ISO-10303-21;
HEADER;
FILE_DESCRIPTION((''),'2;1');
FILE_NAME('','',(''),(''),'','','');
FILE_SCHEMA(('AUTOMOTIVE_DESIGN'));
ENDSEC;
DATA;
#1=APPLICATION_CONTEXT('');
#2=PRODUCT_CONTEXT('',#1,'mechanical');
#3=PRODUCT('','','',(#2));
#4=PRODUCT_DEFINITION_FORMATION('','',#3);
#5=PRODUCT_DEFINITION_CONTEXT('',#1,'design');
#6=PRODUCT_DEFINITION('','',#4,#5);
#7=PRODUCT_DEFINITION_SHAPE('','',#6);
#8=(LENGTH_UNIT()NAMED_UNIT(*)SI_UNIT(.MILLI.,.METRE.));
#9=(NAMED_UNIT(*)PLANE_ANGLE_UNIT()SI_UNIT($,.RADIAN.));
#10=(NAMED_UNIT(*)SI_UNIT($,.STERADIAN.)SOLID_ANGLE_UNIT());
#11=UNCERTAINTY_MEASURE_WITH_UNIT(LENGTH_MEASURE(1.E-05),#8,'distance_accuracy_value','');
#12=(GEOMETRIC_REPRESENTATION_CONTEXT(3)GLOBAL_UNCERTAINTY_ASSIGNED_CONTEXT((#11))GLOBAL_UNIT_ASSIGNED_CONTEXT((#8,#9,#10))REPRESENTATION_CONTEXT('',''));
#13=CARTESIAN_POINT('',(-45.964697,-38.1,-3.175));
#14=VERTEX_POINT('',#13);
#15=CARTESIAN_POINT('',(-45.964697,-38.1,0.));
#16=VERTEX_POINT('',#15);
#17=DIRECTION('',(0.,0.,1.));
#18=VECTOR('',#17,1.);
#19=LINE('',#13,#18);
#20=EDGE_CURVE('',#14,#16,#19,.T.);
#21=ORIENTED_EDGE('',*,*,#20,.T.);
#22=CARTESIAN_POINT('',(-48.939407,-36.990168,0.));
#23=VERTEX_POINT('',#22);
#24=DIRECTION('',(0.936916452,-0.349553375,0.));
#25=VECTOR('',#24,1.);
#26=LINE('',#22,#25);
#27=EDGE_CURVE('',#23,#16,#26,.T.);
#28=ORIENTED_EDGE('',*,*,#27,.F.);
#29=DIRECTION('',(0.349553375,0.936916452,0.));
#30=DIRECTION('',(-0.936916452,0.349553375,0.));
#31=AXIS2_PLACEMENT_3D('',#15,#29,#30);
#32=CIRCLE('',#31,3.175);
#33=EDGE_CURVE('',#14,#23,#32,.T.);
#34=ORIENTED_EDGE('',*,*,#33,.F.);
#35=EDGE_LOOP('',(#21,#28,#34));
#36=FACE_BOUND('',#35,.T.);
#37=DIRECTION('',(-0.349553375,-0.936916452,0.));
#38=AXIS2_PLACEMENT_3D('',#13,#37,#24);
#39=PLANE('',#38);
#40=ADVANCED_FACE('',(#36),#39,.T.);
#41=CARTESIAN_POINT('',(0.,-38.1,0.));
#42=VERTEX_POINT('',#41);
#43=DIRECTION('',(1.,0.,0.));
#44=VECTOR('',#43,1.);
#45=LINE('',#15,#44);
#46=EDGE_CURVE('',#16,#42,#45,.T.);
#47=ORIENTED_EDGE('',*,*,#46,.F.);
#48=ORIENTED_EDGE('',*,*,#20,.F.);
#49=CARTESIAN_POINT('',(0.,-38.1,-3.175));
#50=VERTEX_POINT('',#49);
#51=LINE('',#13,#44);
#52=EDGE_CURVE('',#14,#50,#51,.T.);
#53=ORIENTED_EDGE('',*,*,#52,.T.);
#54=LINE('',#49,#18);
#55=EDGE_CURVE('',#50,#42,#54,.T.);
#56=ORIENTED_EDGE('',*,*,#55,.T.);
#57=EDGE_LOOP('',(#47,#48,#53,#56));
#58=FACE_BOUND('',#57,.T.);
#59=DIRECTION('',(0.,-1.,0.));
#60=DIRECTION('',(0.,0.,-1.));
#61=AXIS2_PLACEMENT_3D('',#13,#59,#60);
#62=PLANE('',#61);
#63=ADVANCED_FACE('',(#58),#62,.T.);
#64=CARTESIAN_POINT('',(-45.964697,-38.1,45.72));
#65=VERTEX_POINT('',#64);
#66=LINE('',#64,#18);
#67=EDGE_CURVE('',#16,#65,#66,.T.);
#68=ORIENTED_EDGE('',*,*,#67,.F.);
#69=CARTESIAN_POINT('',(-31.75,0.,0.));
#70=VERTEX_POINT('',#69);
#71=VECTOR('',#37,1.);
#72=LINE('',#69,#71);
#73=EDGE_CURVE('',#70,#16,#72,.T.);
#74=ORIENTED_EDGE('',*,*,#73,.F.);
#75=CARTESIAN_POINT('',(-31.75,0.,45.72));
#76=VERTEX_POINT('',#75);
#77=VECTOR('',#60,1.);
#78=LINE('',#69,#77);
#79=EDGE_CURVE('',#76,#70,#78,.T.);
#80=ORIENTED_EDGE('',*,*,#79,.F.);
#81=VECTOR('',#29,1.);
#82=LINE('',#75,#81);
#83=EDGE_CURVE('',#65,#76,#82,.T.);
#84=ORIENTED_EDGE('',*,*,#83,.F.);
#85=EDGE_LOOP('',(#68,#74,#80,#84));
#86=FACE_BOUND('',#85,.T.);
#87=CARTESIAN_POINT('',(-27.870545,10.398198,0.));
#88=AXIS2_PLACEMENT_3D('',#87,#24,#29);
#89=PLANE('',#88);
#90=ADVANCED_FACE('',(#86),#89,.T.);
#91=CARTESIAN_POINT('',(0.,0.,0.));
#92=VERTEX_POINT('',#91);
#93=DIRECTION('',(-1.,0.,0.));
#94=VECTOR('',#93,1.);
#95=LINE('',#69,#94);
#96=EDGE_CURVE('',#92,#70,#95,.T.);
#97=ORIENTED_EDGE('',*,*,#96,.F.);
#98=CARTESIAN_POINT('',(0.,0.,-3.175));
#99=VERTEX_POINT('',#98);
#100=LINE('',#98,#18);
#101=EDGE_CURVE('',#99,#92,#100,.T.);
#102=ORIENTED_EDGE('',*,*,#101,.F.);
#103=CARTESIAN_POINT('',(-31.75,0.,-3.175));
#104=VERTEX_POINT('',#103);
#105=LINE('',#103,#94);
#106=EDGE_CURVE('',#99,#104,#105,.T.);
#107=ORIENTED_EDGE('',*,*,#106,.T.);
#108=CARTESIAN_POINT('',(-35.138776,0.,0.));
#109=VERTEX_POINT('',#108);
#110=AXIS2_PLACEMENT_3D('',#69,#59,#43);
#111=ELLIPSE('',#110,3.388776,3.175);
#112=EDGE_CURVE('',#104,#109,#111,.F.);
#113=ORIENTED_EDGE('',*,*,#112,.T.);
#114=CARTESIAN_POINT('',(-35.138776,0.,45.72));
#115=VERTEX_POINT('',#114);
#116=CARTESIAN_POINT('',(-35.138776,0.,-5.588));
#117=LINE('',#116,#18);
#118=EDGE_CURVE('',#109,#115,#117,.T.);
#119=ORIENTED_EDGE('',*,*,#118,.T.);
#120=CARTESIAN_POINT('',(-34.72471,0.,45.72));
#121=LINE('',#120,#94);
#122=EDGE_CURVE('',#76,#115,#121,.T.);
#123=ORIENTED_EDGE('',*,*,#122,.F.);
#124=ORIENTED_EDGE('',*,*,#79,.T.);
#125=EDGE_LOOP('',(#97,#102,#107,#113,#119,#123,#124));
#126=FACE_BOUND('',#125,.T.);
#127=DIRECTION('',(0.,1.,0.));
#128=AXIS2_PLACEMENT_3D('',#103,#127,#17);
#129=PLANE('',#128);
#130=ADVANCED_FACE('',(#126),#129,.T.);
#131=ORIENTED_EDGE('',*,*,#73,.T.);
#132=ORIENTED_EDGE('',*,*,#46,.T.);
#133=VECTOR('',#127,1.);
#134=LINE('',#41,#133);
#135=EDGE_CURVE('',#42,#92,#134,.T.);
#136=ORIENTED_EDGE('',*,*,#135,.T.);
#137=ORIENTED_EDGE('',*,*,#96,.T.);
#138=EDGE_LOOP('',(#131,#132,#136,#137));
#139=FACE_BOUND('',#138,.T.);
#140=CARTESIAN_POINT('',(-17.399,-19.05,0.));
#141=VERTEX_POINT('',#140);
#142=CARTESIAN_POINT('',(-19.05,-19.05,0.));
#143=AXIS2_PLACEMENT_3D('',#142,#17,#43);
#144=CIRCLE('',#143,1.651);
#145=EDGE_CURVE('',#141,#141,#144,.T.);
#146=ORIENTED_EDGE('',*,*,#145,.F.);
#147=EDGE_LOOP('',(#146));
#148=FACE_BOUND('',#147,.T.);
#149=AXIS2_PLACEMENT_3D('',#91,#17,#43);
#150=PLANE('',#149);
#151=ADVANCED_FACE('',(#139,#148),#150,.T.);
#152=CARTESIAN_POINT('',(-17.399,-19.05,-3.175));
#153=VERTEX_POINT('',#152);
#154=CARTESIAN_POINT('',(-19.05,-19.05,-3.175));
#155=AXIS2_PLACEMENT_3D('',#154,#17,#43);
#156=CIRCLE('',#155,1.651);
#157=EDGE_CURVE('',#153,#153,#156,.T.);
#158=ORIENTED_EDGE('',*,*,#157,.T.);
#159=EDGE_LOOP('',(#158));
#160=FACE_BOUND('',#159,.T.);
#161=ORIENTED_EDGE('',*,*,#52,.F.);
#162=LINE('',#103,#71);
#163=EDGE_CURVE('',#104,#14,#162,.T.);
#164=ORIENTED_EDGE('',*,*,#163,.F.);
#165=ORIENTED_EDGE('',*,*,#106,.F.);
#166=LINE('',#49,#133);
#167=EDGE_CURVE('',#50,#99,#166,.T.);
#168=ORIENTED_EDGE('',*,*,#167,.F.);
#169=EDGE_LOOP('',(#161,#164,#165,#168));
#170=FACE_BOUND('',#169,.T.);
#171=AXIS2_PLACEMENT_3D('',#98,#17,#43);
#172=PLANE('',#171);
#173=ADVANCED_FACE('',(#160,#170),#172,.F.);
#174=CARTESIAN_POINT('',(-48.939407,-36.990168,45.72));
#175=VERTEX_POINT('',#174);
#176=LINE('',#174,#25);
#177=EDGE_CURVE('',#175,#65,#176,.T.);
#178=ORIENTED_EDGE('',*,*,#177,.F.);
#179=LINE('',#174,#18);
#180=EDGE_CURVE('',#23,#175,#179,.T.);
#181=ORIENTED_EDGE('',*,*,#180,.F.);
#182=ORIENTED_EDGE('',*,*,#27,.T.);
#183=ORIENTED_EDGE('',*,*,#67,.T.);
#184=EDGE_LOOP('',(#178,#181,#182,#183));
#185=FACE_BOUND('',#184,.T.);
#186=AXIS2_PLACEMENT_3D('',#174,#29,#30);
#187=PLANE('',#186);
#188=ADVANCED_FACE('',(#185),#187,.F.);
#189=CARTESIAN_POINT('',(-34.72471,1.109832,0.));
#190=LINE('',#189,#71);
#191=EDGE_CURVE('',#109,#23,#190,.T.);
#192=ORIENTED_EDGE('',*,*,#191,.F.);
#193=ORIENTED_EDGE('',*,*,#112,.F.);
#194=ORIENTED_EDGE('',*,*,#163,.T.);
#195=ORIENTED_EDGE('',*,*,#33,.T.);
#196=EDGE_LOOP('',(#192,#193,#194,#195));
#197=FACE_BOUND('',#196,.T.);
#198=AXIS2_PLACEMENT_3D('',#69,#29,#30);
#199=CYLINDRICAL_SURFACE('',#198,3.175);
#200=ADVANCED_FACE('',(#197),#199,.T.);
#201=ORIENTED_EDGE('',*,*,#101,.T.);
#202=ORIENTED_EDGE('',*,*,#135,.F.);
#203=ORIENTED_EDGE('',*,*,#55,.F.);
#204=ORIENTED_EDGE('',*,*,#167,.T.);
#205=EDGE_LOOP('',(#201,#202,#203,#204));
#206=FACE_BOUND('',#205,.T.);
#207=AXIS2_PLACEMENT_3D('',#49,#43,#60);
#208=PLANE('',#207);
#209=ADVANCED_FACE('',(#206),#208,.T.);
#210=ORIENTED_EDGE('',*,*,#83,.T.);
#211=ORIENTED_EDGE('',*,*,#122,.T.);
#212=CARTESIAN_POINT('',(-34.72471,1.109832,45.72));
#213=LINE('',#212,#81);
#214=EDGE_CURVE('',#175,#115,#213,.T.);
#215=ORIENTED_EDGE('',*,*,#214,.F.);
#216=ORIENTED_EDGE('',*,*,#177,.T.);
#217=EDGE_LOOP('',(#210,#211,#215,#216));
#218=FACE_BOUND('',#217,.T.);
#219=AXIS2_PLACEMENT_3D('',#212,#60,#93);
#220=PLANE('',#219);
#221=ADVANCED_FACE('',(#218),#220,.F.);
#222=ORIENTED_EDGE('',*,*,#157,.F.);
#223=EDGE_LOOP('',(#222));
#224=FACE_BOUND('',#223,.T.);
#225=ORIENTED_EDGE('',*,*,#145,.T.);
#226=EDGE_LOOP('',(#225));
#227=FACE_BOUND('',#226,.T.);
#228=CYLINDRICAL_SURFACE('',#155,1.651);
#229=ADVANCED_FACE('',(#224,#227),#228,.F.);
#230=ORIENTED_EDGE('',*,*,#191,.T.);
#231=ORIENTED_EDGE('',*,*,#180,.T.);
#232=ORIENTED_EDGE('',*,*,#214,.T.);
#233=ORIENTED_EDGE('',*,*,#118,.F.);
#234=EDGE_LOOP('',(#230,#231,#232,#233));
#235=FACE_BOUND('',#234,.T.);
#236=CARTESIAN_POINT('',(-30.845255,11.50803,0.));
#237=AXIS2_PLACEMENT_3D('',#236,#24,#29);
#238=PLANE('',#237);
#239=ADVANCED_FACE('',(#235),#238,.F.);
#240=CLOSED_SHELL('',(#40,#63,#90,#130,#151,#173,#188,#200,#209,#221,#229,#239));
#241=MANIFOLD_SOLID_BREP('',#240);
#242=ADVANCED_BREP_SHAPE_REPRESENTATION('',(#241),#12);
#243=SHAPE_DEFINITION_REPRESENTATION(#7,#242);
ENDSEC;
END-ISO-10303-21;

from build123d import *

# Parameters (mm, degrees)
SKETCH13_R              = 1.651
BASE_FLANGE5_DEPTH      = 3.175
EDGE_FLANGE4_START      = -51.763631849
EDGE_FLANGE4_DEPTH      = 40.665312179
CUT_EXTRUDE4_DEPTH      = 53.975
CUT_EXTRUDE4_DEPTH_BACK = 5.588


# Read off the part's stored shape, not the designer's step: Edge-Flange4
# Sheet-metal steps are written as plain solids
with BuildPart() as part:
    # Sketch13 → Base-Flange5 (new body)
    with BuildSketch(Plane.XY):
        Polygon((-31.75, 0), (0, 0), (0, -38.1), (-45.964697135, -38.1), align=None)
        with Locations((-19.05, -19.05)):
            Circle(SKETCH13_R, mode=Mode.SUBTRACT)
    extrude(amount=-BASE_FLANGE5_DEPTH)

    # Edge-Flange4 outline → Edge-Flange4 (add)
    with BuildSketch(Plane(origin=(0, 0, 0), x_dir=(0.9369164518419233, -0.34955337542060905, 0), z_dir=(0.34955337542060905, 0.9369164518419232, 0)).offset(EDGE_FLANGE4_START)):
        with BuildLine():
            Line((-29.747097346, -45.72), (-29.747097346, 3.175))
            ThreePointArc((-29.747097346, 3.175), (-31.992161376, 2.24506403), (-32.922097346, 0))
            Line((-32.922097346, 0), (-32.922097346, -45.72))
            Line((-32.922097346, -45.72), (-29.747097346, -45.72))
        make_face()
    extrude(amount=EDGE_FLANGE4_DEPTH)

    # Sketch51 → Cut-Extrude4 (cut, two sides: drawn at the far end of the back side and taken through both)
    with BuildSketch(Plane.XY.offset(-CUT_EXTRUDE4_DEPTH_BACK)):
        Polygon((-31.75, 0), (-35.138776015, 0), (-34.724709735, 1.109831967), align=None)
    extrude(amount=CUT_EXTRUDE4_DEPTH + CUT_EXTRUDE4_DEPTH_BACK, mode=Mode.SUBTRACT)


solid = part.part
